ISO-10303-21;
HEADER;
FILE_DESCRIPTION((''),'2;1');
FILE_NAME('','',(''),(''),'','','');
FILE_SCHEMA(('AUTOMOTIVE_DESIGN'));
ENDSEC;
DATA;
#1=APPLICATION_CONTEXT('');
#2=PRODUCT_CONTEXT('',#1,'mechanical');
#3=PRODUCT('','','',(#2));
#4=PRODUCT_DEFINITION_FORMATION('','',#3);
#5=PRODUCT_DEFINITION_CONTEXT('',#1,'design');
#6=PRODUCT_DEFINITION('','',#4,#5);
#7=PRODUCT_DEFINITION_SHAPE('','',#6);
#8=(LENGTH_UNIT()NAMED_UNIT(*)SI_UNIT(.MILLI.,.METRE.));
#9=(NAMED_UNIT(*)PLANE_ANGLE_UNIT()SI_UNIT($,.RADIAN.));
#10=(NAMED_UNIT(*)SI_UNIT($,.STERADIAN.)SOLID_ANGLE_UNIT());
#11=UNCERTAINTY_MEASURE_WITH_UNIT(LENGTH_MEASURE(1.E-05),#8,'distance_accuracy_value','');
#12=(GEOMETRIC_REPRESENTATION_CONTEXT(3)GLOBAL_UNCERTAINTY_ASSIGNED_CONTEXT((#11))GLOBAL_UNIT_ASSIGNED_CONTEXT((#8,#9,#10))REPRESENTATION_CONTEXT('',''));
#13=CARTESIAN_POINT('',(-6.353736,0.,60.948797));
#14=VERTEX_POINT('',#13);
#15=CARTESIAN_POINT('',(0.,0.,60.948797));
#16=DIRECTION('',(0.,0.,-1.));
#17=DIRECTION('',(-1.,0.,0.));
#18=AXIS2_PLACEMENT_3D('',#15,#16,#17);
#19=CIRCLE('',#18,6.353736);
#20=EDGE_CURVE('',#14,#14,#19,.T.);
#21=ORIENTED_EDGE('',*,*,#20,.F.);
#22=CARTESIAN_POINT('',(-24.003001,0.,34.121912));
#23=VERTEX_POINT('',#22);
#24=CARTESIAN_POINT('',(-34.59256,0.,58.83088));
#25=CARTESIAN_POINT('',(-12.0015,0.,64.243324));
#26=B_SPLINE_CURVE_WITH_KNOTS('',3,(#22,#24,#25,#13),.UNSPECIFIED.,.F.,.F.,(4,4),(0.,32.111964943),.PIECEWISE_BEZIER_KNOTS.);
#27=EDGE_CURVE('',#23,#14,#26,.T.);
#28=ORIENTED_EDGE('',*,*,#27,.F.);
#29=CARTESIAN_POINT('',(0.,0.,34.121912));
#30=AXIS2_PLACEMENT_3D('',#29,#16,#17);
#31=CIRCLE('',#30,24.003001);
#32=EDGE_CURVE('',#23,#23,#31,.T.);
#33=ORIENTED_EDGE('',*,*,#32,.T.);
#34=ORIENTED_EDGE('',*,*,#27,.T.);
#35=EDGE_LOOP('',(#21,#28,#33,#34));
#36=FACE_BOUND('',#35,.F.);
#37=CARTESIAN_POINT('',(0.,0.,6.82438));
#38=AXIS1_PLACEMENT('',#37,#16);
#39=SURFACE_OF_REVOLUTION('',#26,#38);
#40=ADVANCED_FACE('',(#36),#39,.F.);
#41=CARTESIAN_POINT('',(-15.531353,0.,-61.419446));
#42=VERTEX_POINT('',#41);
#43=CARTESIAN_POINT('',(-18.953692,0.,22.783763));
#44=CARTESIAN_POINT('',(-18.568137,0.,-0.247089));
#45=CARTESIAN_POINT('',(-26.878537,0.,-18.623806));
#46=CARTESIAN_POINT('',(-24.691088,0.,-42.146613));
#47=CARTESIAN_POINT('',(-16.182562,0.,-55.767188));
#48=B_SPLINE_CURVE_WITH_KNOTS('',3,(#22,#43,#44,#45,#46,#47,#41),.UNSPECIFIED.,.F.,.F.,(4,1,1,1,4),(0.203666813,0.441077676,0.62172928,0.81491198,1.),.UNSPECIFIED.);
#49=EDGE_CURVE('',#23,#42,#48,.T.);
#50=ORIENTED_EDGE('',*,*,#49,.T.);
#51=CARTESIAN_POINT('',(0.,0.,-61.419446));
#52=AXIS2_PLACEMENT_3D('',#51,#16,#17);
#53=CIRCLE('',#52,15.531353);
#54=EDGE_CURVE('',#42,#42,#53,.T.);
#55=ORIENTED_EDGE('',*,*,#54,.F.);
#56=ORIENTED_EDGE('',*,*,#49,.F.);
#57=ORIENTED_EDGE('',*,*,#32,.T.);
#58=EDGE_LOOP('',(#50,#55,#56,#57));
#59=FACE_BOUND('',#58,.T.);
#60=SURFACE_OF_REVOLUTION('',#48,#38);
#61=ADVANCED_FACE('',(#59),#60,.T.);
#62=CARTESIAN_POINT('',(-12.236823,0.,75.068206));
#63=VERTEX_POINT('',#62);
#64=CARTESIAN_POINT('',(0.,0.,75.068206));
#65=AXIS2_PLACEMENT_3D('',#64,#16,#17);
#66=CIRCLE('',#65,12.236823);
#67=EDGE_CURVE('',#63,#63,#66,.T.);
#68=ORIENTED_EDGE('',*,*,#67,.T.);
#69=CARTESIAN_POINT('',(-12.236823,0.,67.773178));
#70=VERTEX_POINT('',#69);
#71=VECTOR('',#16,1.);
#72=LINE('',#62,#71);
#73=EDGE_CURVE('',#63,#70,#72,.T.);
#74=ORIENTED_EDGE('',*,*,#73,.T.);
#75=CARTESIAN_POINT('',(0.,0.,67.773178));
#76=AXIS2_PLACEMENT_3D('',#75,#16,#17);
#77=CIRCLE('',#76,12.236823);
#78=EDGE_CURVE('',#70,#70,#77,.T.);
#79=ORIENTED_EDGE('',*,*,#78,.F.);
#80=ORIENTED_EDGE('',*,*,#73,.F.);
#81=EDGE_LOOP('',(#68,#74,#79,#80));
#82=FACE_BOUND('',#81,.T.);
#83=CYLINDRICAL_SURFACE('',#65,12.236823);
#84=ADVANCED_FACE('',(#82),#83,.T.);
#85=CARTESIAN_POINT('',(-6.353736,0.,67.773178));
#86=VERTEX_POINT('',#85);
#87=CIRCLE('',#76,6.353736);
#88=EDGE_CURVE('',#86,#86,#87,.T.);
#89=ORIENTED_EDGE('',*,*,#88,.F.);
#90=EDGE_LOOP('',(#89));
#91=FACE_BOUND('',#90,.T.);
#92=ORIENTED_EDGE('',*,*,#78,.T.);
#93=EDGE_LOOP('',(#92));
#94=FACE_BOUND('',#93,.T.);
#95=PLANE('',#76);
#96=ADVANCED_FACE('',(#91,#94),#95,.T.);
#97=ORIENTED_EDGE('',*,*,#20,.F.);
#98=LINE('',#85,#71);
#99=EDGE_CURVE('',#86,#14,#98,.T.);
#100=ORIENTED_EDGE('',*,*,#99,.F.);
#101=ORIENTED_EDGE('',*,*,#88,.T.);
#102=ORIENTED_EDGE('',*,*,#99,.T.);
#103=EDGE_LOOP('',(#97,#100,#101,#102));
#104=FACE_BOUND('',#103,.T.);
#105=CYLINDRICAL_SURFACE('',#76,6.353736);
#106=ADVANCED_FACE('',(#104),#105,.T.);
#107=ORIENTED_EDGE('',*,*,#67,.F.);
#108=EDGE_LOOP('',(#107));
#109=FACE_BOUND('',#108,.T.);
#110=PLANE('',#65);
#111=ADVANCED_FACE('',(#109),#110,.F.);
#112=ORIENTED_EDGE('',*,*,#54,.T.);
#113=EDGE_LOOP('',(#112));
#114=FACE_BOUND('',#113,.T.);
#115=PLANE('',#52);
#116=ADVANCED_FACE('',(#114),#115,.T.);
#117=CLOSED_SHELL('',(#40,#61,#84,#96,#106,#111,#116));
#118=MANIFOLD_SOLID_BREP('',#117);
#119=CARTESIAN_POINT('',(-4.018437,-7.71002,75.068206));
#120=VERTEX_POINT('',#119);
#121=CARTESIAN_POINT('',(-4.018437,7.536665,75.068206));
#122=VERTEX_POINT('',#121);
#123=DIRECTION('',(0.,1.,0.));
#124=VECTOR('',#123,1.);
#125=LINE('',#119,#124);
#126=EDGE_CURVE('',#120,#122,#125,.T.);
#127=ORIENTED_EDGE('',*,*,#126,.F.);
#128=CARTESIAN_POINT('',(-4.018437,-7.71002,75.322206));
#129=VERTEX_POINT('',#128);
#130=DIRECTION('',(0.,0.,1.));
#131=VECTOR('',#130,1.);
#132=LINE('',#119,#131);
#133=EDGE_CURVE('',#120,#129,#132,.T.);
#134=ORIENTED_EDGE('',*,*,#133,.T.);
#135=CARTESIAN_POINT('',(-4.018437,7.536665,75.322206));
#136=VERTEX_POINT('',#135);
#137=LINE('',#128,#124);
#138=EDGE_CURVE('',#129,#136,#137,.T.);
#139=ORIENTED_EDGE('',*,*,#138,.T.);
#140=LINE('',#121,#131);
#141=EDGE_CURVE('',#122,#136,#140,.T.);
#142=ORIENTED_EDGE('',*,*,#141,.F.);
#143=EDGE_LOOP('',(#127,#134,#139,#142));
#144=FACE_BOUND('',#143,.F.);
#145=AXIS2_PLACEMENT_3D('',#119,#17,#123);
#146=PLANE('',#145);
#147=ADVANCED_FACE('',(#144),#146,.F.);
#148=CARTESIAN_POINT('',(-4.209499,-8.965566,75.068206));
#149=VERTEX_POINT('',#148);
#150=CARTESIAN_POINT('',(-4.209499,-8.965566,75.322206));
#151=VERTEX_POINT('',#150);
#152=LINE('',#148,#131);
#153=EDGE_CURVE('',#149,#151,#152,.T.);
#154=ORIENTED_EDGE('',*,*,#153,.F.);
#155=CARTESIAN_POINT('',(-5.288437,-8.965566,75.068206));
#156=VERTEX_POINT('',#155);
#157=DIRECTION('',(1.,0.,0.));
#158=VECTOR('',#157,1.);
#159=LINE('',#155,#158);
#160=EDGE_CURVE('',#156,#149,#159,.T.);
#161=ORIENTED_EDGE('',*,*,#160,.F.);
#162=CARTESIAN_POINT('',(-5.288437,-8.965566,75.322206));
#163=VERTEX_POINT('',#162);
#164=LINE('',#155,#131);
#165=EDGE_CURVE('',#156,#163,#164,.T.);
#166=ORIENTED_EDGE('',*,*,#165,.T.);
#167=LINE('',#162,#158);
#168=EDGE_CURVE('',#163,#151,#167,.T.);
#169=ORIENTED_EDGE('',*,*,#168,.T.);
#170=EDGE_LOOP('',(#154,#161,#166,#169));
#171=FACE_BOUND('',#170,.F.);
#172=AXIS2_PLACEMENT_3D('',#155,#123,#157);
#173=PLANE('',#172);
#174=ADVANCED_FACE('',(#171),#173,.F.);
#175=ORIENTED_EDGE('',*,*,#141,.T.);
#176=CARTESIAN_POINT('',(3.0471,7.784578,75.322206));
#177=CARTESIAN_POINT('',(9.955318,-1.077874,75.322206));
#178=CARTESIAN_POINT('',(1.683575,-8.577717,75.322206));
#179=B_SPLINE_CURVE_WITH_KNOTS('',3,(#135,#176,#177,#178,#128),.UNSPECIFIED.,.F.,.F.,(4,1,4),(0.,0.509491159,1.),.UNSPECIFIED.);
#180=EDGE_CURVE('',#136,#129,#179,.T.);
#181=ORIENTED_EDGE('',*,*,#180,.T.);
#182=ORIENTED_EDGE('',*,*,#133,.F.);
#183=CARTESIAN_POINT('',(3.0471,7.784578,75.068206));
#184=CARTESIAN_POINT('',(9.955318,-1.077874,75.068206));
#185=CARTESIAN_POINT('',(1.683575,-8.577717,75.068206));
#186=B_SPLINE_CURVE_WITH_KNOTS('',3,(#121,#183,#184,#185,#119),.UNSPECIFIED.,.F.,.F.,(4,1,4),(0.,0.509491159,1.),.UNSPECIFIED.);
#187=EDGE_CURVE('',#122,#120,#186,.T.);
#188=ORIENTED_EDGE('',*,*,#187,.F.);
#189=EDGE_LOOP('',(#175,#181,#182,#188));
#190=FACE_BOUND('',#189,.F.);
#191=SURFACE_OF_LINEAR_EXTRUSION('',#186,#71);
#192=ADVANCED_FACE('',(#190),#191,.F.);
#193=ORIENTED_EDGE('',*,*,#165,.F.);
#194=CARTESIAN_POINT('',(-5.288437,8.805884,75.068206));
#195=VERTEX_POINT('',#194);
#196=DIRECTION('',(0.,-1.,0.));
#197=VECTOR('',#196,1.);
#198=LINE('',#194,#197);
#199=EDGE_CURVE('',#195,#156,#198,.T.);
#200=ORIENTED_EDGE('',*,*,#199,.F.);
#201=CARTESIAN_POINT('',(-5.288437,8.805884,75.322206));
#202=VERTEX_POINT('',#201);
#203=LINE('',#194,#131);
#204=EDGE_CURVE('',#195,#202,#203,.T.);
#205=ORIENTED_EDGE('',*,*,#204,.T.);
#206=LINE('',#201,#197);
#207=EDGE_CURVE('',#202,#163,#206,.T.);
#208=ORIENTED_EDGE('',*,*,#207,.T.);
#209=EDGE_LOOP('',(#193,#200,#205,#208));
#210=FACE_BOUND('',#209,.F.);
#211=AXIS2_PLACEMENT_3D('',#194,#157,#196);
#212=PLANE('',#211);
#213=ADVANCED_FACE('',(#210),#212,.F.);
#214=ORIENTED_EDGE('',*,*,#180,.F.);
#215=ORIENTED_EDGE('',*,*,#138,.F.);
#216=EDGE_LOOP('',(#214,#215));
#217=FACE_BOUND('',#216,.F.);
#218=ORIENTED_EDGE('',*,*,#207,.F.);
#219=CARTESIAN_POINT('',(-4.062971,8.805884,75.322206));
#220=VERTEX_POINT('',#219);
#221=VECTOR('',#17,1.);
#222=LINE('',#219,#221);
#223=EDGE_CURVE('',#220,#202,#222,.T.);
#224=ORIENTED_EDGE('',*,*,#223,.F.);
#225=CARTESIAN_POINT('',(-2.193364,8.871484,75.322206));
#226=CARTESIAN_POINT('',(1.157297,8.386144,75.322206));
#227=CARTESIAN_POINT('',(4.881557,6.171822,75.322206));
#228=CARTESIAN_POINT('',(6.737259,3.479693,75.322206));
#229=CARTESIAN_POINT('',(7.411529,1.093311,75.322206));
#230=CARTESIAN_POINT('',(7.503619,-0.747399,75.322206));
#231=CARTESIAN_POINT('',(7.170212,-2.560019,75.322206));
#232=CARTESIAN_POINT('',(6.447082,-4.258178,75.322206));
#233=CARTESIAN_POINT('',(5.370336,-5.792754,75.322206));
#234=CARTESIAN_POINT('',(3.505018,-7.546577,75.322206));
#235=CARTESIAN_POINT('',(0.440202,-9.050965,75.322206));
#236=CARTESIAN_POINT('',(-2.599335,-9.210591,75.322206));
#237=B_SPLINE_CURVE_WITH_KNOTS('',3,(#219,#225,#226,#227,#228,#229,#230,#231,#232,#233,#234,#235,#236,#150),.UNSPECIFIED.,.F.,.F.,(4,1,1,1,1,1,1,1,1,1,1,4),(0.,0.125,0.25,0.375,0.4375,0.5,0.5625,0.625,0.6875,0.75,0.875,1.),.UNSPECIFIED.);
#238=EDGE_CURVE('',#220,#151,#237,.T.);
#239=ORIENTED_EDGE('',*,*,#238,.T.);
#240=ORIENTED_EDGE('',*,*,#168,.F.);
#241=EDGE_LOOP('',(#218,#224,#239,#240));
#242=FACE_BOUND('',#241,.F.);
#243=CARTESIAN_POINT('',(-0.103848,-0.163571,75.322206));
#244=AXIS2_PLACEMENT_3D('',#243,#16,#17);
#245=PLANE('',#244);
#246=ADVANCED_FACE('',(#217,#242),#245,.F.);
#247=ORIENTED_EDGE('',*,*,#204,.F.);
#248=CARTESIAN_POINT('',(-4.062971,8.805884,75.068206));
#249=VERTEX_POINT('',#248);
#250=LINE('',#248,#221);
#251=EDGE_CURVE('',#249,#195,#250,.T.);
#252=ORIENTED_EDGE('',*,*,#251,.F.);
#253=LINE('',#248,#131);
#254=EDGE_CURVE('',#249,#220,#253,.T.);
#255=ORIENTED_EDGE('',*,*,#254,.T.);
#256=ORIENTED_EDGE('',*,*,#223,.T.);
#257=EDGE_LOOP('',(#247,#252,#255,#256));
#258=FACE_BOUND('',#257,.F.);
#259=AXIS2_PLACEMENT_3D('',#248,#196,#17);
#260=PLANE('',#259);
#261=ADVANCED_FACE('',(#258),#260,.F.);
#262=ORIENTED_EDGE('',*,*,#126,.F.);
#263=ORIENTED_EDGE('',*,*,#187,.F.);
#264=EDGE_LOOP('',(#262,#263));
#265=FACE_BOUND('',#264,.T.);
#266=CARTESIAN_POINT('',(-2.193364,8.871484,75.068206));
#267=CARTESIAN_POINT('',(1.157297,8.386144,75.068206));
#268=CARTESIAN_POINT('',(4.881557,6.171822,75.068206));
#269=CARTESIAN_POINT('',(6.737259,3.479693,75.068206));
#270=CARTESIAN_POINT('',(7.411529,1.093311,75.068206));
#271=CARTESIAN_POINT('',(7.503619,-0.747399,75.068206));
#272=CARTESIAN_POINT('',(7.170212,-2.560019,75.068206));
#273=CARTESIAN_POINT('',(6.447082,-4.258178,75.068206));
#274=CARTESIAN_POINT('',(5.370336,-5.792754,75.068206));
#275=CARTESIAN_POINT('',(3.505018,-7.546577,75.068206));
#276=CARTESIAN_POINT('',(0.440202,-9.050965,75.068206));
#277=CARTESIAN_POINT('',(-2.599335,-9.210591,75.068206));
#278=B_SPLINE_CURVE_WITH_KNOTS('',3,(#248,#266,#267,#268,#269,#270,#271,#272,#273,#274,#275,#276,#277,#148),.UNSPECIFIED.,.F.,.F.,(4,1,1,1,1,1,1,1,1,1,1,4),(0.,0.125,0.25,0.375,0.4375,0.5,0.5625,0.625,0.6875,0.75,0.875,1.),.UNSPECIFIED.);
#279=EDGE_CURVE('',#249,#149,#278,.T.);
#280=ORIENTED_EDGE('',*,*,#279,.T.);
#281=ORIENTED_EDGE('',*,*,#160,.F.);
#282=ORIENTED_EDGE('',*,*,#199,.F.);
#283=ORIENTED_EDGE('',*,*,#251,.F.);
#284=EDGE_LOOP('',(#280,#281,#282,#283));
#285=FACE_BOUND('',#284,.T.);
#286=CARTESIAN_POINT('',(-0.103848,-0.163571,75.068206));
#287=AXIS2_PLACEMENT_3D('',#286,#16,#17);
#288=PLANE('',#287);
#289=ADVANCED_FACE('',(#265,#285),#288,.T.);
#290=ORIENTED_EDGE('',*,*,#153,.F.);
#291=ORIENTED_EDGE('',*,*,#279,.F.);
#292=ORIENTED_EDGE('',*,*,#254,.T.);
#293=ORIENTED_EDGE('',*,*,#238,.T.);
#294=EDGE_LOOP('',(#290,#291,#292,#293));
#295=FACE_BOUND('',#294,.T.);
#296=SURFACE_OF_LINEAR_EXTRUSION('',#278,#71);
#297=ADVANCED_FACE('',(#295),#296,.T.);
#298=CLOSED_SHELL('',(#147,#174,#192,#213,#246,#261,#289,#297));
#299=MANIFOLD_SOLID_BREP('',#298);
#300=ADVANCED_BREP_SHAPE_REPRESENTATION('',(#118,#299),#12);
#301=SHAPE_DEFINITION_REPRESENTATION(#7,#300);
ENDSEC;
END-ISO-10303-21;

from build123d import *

# Parameters (mm, degrees)
F3_DEPTH = 0.254


# Not quite as in the source:
# - the dataset's text gives a spline's control points without its knots; the knots are read off the source's solid


with BuildPart() as f1:
    # F0 (on Front) → F1 (revolve)
    with BuildSketch(Plane.XZ):
        with BuildLine():
            add(Edge.make_bspline(
                [(-24.00300093, 34.1219119728), (-34.5925595611, 58.8308796287), (-12.001500465, 64.243324101), (-6.3537359238, 60.9487965703)],
                knots=[0, 0, 0, 0, 32.1119649425, 32.1119649425, 32.1119649425, 32.1119649425], degree=3))
            add(Edge.make_bspline(
                [(-24.00300093, 34.1219119728), (-18.9536922311, 22.7837625244), (-18.5681374824, -0.2470894327), (-26.8785367938, -18.6238056214), (-24.691088195, -42.1466133195), (-16.1825619965, -55.7671880803), (-15.5313527212, -61.4194460213)],
                knots=[0.203666813, 0.203666813, 0.203666813, 0.203666813, 0.4410776761, 0.6217292798, 0.8149119798, 1, 1, 1, 1], degree=3))
            Line((-15.5313527212, -61.4194460213), (0, -61.4194460213))
            Line((0, -61.4194460213), (0, 75.068205595))
            Line((0, 75.068205595), (-12.2368233278, 75.068205595))
            Line((-12.2368233278, 75.068205595), (-12.2368233278, 67.7731782198))
            Line((-12.2368233278, 67.7731782198), (-6.3537359238, 67.7731782198))
            Line((-6.3537359238, 67.7731782198), (-6.3537359238, 60.9487965703))
        make_face()
    revolve(axis=Axis((0, 0, 6.8243797868), (0, 0, -1)))


with BuildPart() as f3:
    # F2 (on face) → F3 (new body)
    with BuildSketch(Plane.XY.offset(75.068205595)):
        with BuildLine():
            add(Edge.make_bspline(
                [(-4.062971086, 8.8058835483), (-2.1933640147, 8.8714837532), (1.157297254, 8.386143894), (4.8815568375, 6.1718222853), (6.7372592969, 3.4796927349), (7.4115294482, 1.0933105566), (7.5036193193, -0.7473994059), (7.1702119433, -2.5600192903), (6.4470817235, -4.2581784287), (5.3703358944, -5.7927542709), (3.5050178222, -7.5465765347), (0.4402015685, -9.0509652568), (-2.5993347226, -9.2105905441), (-4.2094985396, -8.9655655025)],
                knots=[0, 0, 0, 0, 0.125, 0.25, 0.375, 0.4375, 0.5, 0.5625, 0.625, 0.6875, 0.75, 0.875, 1, 1, 1, 1], degree=3))
            Line((-4.062971086, 8.8058835483), (-5.2884371173, 8.8058835483))
            Line((-5.2884371173, 8.8058835483), (-5.2884371173, 7.5366646051))
            Line((-5.2884371173, 7.5366646051), (-5.2884371173, -7.7100195922))
            Line((-5.2884371173, -7.7100195922), (-5.2884371173, -8.9655655025))
            Line((-5.2884371173, -8.9655655025), (-4.2094985396, -8.9655655025))
        make_face()
        with BuildLine():
            Line((-4.0184371173, -7.7100195922), (-4.0184371173, 7.5366646051))
            add(Edge.make_bspline(
                [(-4.0184371173, 7.5366646051), (3.0470998026, 7.7845780179), (9.9553181322, -1.0778744554), (1.6835748684, -8.5777174681), (-4.0184371173, -7.7100195922)],
                knots=[0, 0, 0, 0, 0.509491159, 1, 1, 1, 1], degree=3))
        make_face(mode=Mode.SUBTRACT)
    extrude(amount=F3_DEPTH)


solid = Compound([f1.part, f3.part])
